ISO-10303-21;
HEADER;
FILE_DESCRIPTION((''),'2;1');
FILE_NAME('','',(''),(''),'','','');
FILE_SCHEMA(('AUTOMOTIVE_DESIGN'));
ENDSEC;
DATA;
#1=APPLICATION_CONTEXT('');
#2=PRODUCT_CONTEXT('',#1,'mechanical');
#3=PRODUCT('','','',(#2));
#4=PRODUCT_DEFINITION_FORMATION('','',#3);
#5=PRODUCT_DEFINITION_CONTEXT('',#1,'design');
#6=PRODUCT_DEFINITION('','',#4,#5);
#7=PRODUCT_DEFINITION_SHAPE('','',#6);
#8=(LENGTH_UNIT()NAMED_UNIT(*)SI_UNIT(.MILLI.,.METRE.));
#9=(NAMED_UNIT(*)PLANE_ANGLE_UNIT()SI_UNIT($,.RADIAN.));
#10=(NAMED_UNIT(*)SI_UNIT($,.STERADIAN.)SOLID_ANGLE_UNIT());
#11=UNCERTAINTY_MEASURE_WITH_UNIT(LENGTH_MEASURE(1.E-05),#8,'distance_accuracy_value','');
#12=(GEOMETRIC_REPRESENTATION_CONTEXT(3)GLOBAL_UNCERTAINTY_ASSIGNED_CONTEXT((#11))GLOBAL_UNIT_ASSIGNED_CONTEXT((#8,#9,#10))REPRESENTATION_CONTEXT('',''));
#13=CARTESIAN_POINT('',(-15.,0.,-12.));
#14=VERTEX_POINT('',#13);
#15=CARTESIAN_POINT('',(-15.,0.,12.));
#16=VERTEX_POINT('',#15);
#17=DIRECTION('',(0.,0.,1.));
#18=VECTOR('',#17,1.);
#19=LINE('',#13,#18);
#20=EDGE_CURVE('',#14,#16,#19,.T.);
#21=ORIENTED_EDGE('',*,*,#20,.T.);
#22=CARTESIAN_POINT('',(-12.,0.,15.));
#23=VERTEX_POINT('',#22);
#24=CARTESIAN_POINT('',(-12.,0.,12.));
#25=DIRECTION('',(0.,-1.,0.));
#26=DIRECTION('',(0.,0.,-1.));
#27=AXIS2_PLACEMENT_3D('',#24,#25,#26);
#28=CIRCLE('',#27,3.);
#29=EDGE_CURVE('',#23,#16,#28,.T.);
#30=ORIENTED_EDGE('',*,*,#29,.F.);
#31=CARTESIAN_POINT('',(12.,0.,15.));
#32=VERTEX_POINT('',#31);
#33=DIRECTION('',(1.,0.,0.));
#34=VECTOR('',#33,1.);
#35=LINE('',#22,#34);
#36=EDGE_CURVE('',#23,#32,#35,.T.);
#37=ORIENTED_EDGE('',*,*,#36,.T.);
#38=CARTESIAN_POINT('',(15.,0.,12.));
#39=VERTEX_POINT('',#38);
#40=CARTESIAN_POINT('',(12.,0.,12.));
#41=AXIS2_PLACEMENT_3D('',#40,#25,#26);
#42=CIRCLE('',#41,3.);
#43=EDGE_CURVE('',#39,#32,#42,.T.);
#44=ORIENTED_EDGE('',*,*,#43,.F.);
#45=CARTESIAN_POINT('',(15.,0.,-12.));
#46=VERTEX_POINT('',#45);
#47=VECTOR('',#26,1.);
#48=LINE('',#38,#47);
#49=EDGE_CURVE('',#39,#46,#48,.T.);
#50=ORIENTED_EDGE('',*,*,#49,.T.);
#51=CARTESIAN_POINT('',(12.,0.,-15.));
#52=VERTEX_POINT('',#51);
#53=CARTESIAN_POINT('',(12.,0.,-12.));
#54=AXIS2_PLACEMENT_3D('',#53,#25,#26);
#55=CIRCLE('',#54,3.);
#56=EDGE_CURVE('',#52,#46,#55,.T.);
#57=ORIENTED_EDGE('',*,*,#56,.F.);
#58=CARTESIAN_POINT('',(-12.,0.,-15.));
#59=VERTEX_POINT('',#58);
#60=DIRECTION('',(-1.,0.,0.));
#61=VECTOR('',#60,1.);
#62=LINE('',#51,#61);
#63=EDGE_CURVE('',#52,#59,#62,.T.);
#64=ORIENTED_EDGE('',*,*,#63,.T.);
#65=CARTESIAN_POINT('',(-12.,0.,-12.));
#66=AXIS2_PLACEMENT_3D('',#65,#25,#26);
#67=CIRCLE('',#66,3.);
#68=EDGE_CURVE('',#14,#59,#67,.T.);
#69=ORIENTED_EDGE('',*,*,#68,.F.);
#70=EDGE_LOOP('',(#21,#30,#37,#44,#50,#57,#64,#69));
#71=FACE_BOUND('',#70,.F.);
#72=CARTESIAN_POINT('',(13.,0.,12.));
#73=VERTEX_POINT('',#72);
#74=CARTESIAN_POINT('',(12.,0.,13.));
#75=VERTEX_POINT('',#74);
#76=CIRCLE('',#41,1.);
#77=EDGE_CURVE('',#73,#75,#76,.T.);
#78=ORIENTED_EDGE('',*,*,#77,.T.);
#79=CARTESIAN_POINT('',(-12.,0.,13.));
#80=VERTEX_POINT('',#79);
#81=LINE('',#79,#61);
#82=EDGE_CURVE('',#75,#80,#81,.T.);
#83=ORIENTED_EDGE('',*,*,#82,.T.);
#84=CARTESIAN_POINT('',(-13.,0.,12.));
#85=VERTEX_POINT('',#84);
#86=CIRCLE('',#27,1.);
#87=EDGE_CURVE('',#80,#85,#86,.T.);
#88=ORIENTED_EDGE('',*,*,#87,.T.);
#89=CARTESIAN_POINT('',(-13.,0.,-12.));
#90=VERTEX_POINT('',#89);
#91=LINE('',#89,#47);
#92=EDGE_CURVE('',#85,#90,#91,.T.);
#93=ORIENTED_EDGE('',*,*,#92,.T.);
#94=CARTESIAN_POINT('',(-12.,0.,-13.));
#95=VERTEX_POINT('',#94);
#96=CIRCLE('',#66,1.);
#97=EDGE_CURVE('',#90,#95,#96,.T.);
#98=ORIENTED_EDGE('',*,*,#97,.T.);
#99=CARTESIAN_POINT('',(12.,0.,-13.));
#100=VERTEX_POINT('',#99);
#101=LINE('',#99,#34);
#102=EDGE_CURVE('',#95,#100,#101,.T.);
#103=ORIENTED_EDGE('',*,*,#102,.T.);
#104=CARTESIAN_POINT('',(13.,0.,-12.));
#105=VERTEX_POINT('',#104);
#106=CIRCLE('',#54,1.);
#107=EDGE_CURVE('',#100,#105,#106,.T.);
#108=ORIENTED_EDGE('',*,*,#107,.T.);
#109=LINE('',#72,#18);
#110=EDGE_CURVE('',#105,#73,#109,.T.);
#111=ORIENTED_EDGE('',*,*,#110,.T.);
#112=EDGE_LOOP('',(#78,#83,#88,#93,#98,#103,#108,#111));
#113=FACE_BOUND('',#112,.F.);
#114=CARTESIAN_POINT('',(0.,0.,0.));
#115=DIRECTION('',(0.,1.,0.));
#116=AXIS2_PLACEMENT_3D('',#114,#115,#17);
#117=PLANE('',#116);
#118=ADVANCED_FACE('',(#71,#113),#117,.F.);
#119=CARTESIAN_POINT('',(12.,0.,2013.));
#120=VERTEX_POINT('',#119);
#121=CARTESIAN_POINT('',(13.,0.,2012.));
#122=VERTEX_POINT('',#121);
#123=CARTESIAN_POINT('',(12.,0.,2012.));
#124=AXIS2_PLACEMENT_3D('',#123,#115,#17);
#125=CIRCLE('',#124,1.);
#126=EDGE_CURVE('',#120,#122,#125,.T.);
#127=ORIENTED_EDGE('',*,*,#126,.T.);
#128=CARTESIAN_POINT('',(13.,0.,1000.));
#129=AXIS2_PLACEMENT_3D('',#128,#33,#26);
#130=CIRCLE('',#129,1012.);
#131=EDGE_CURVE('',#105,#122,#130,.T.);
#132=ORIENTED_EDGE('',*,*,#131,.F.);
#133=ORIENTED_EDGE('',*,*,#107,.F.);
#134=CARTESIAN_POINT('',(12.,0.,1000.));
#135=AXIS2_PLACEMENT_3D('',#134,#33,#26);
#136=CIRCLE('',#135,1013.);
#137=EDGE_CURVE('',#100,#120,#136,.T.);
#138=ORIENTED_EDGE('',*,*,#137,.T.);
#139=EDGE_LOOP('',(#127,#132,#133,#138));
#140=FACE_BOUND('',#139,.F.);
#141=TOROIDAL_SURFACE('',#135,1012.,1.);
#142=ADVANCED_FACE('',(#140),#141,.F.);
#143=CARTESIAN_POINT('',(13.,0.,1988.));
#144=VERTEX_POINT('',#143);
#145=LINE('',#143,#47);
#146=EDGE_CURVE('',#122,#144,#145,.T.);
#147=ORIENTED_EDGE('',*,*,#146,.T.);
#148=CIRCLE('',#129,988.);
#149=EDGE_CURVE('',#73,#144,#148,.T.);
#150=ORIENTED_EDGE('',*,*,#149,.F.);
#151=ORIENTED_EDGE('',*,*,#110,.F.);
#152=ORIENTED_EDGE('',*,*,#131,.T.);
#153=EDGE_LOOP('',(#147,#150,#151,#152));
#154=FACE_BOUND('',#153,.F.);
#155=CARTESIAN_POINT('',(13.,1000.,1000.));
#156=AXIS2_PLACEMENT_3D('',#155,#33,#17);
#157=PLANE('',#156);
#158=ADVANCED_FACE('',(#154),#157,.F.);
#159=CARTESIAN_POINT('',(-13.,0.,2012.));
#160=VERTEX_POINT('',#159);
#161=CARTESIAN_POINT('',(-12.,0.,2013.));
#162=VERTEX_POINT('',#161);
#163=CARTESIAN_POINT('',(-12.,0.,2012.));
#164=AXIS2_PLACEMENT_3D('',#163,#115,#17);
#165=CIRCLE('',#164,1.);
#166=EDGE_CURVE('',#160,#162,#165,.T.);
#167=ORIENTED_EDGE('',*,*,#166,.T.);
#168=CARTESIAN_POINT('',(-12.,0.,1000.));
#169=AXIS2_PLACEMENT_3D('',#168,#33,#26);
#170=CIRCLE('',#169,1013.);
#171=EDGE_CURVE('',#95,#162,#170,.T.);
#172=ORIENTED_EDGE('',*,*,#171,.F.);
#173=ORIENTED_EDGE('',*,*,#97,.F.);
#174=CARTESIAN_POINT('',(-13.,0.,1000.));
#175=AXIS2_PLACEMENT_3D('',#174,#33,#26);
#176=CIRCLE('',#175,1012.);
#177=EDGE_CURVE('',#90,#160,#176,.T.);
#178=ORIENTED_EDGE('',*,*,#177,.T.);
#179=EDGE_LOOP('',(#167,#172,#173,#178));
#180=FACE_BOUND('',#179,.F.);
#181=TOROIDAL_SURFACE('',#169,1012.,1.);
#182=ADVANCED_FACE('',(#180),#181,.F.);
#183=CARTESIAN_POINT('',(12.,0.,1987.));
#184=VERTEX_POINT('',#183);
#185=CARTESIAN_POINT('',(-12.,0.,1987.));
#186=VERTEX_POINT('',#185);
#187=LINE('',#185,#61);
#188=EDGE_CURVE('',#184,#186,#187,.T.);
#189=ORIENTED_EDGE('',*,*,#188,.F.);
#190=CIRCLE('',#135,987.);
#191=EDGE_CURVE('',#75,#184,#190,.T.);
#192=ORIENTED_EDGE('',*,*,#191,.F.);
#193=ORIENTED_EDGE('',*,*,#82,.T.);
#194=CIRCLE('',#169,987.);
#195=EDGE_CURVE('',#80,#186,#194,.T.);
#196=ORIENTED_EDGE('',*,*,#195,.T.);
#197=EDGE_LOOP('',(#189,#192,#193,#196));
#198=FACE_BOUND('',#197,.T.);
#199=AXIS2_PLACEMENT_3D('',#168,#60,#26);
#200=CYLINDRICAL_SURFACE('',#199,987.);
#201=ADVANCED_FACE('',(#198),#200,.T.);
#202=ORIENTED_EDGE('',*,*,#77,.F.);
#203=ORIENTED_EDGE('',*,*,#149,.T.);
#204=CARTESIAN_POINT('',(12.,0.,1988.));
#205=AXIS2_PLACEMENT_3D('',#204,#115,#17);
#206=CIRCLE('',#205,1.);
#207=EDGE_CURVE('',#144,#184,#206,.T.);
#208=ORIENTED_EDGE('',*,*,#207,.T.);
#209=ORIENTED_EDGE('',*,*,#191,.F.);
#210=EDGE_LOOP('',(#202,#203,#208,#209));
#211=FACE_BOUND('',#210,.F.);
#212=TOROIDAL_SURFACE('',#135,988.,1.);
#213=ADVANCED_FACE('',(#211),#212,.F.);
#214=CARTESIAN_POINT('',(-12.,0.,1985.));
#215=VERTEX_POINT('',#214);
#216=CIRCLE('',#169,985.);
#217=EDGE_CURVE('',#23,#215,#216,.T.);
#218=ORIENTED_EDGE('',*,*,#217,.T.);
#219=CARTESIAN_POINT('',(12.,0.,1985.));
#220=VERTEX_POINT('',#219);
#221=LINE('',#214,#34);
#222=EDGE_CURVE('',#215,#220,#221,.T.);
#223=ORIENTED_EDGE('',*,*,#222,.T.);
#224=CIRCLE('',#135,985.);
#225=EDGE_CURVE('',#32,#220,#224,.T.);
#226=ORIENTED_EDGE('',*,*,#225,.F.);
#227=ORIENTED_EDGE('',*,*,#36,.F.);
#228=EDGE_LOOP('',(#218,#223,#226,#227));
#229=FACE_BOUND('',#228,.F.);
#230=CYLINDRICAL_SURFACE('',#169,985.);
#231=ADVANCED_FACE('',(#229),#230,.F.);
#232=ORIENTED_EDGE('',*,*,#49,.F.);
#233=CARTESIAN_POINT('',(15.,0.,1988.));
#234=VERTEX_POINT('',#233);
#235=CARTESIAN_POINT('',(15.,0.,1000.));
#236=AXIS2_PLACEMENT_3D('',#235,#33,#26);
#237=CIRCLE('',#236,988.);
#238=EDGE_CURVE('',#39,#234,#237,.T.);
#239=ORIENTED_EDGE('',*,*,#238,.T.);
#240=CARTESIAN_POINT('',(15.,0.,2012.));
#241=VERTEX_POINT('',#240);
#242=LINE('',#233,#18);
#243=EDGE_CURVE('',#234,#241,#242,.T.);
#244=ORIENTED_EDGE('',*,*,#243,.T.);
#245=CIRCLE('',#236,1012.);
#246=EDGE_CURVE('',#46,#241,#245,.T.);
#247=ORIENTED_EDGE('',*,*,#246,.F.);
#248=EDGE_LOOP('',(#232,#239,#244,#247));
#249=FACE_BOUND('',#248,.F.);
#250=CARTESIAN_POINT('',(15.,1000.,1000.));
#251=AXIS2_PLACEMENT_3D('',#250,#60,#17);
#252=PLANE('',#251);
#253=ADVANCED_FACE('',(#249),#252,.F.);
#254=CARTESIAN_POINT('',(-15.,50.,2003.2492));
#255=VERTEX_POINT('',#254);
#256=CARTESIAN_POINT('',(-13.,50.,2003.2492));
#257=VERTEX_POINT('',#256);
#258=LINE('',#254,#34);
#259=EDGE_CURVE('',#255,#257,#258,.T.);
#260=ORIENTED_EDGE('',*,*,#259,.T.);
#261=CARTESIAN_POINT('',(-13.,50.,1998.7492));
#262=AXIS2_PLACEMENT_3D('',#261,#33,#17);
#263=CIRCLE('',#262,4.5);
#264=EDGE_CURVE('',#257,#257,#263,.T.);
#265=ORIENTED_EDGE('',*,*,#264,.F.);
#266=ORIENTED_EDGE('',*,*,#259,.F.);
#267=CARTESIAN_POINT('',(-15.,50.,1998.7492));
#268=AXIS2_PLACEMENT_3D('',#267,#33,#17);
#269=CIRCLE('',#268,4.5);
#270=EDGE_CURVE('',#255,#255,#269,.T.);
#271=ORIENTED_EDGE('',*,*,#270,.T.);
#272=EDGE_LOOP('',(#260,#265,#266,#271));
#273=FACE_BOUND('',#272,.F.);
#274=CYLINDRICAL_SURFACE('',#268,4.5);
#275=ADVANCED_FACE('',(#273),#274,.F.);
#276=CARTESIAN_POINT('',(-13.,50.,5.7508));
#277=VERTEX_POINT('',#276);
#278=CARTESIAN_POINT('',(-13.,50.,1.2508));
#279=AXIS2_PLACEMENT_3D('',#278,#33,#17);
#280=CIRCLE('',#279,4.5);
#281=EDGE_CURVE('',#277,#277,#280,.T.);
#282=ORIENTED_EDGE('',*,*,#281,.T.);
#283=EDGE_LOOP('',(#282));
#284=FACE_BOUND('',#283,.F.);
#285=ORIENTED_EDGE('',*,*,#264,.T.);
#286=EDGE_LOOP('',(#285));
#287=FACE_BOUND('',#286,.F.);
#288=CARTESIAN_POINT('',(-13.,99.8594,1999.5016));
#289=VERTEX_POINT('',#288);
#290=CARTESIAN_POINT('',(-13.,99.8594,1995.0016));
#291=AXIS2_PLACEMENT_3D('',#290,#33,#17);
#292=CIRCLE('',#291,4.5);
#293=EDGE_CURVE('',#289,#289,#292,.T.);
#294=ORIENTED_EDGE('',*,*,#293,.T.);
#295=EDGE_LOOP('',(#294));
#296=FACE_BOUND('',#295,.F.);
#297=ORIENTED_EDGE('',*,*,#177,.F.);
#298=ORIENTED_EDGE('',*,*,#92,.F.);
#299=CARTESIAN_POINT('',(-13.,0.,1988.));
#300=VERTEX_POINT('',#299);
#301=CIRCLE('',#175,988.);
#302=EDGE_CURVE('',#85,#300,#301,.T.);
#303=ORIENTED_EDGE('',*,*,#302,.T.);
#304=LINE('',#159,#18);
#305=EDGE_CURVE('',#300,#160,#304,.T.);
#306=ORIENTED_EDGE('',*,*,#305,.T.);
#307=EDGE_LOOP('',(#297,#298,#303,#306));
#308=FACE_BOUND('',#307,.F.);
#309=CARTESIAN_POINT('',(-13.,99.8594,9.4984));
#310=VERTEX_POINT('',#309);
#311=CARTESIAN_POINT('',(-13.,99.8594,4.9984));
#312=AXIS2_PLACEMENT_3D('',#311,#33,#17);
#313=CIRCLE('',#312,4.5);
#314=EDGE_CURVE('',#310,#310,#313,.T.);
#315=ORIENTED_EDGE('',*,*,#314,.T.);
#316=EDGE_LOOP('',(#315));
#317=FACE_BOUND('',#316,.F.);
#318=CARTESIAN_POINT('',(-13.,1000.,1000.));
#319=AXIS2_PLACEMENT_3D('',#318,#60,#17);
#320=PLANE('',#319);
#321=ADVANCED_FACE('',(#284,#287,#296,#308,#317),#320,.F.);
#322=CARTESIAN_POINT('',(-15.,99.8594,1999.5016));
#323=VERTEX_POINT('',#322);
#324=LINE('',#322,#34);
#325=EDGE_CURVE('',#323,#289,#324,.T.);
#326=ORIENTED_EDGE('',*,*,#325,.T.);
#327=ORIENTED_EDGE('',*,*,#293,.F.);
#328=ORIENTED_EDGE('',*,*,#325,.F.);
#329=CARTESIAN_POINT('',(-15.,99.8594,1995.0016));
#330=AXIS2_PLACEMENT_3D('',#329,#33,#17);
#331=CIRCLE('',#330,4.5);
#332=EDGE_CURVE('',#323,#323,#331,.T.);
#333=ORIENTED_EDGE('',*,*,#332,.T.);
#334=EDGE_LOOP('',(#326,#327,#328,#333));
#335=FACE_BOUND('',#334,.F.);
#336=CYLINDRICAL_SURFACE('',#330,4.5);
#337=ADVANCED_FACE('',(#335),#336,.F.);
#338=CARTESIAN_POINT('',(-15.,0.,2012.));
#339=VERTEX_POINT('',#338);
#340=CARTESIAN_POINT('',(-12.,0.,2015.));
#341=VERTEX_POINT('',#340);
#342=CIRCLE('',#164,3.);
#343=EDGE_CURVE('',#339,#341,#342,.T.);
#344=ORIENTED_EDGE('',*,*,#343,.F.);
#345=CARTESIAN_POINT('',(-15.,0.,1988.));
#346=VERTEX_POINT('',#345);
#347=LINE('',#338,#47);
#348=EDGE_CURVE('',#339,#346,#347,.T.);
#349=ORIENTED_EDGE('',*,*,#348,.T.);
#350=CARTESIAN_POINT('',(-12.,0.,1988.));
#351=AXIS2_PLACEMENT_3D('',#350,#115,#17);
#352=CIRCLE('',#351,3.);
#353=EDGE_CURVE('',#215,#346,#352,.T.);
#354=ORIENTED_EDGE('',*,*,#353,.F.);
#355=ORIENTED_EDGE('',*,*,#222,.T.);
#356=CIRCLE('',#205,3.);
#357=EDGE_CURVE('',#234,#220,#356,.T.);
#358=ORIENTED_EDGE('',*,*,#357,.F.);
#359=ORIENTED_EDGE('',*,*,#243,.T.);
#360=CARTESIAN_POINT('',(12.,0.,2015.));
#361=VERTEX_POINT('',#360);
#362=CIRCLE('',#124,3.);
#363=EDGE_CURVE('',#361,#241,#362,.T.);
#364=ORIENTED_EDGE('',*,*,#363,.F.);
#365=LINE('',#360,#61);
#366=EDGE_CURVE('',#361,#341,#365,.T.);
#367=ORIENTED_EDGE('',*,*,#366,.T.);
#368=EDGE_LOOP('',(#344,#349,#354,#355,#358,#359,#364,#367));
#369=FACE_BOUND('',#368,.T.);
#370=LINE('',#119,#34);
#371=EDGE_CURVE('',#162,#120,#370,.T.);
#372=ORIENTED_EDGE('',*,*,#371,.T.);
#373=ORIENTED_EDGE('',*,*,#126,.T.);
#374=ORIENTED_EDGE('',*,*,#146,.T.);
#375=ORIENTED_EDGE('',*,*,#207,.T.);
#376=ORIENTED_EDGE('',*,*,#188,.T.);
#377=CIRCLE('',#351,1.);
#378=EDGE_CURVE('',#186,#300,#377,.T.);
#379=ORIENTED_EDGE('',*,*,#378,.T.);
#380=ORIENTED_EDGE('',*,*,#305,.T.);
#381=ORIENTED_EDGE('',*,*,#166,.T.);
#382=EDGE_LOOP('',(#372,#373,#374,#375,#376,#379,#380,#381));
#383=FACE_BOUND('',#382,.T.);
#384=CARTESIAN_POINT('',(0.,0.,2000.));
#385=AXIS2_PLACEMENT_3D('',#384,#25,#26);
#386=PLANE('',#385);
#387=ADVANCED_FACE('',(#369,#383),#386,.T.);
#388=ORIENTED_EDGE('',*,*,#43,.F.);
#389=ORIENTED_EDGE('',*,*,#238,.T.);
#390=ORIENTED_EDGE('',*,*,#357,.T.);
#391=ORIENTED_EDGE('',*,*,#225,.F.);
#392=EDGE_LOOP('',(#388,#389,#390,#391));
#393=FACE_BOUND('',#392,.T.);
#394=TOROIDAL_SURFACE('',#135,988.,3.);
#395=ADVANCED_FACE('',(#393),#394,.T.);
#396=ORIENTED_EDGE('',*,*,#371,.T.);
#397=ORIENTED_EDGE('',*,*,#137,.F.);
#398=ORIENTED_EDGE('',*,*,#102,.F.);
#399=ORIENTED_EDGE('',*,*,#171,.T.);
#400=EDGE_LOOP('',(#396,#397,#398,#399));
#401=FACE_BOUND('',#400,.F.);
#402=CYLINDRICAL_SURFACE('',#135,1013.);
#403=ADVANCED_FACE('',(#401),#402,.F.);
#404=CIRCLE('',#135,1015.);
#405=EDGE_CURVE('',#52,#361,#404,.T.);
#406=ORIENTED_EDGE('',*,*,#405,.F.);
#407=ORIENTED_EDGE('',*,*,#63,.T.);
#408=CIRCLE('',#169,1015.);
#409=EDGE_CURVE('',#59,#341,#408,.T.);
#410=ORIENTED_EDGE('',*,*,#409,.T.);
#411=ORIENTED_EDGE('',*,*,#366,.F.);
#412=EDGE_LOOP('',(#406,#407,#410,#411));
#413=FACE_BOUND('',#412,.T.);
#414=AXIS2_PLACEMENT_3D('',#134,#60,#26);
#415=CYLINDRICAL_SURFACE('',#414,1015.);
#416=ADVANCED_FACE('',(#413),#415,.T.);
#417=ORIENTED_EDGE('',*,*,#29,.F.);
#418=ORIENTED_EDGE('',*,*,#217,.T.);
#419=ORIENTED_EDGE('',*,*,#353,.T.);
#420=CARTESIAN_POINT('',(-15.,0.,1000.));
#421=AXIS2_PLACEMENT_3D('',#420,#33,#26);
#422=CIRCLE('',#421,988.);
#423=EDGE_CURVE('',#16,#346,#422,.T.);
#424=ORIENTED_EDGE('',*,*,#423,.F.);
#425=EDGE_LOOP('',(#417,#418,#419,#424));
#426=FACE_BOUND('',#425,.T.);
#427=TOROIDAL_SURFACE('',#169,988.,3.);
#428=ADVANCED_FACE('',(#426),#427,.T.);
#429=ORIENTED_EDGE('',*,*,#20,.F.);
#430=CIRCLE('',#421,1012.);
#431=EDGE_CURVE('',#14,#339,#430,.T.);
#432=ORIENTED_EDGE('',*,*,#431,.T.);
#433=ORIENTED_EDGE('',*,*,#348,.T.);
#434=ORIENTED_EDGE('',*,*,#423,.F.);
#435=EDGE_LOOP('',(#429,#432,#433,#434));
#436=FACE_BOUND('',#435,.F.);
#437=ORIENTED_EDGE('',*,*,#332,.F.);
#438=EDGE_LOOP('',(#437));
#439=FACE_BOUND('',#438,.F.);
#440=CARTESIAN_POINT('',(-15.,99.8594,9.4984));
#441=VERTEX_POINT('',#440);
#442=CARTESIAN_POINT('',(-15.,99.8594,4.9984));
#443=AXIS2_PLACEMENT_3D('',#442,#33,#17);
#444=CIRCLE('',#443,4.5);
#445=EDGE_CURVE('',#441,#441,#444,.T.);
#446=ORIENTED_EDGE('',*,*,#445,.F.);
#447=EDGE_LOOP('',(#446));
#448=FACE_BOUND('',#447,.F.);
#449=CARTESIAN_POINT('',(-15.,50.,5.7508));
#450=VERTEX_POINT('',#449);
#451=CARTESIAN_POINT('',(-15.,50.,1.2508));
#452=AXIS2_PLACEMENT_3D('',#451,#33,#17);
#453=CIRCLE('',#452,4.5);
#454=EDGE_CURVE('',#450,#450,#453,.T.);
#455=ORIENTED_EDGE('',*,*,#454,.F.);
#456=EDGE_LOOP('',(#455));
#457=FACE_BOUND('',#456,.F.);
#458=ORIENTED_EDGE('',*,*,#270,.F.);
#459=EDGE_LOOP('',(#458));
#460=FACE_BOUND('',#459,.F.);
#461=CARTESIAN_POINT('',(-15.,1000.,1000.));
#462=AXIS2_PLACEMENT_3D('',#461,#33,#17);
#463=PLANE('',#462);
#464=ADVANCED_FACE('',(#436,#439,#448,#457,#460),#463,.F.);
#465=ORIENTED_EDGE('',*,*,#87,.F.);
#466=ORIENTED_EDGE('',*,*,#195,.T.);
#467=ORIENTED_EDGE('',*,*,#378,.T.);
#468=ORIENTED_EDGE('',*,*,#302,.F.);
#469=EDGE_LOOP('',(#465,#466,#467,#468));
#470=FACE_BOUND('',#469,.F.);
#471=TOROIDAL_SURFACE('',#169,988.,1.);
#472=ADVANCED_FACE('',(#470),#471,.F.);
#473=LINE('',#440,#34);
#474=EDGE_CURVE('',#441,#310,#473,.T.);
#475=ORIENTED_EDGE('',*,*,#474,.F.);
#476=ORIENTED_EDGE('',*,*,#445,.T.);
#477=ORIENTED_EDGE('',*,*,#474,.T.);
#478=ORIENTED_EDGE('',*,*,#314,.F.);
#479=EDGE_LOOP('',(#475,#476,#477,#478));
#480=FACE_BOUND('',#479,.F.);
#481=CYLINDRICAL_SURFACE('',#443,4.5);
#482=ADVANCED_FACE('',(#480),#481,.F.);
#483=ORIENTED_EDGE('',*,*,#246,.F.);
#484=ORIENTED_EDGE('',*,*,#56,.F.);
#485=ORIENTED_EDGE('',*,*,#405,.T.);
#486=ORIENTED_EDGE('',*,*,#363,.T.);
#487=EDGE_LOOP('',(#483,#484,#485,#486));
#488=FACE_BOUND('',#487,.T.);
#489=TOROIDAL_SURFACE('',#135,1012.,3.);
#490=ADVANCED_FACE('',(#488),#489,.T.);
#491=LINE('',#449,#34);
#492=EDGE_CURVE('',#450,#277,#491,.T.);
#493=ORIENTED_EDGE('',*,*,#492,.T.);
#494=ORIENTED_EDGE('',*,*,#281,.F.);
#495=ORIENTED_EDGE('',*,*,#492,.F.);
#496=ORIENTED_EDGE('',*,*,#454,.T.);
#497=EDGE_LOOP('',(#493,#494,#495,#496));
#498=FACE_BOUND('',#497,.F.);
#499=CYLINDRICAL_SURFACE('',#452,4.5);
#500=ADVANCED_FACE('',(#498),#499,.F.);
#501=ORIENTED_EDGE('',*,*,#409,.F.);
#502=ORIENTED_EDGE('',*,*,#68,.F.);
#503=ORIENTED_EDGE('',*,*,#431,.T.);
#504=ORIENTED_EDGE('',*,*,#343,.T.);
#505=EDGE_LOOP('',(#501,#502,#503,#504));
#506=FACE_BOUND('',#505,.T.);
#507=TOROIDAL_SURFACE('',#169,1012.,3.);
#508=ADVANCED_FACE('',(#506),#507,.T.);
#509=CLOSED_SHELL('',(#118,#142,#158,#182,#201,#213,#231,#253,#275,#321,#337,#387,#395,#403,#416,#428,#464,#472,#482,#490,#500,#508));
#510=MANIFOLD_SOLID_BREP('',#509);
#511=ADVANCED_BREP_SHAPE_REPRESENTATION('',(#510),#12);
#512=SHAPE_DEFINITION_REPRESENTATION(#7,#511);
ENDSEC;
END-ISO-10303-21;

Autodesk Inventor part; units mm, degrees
ref_plane "YZ Plane" through (0, 0, 0) normal (1, 0, 0) x (0, 1, 0)
ref_plane "XZ Plane" through (0, 0, 0) normal (0, 1, 0) x (-1, 0, 0)
sketch "Sketch1" plane through (0, 0, 0) normal (0, 1, 0) x (-1, 0, 0)
  line L0 (-12, 14) -> (12, 14) construction
  line L1 (14, 12) -> (14, -12) construction
  line L2 (12, -14) -> (-12, -14) construction
  line L3 (-14, -12) -> (-14, 12) construction
  line L4 (-14, 14) -> (14, -14) construction
  line L5 (14, 14) -> (-14, -14) construction
  arc A0 (14, 12) -> (12, 14) centre (12, 12) ccw construction
  arc A1 (12, -14) -> (14, -12) centre (12, -12) ccw construction
  arc A2 (-14, -12) -> (-12, -14) centre (-12, -12) ccw construction
  arc A3 (-12, 14) -> (-14, 12) centre (-12, 12) ccw construction
  line L6 (-12, -15) -> (12, -15)
  arc A4 (12, -15) -> (15, -12) centre (12, -12) ccw
  line L7 (15, -12) -> (15, 12)
  arc A5 (15, 12) -> (12, 15) centre (12, 12) ccw
  line L8 (12, 15) -> (-12, 15)
  arc A6 (-12, 15) -> (-15, 12) centre (-12, 12) ccw
  line L9 (-15, 12) -> (-15, -12)
  arc A7 (-15, -12) -> (-12, -15) centre (-12, -12) ccw
  line L10 (13, -12) -> (13, 12)
  arc A8 (13, 12) -> (12, 13) centre (12, 12) ccw
  line L11 (12, 13) -> (-12, 13)
  arc A9 (-12, 13) -> (-13, 12) centre (-12, 12) ccw
  line L12 (-13, 12) -> (-13, -12)
  arc A10 (-13, -12) -> (-12, -13) centre (-12, -12) ccw
  line L13 (-12, -13) -> (12, -13)
  arc A11 (12, -13) -> (13, -12) centre (12, -12) ccw
  point P0 (0, 0)
  point P1 (0, 0)
  point P2 (0, 0)
  dimension "d10" = 2
  dimension "depth" = 30
  dimension "width" = 30
  dimension "thickness" = 2
sketch "Sketch3" plane through (0, 0, 0) normal (1, 0, 0) x (0, 1, 0)
  line L0 (0, 0) -> (0, 2000) construction
  arc A0 (0, 0) -> (0, 2000) centre (0, 1000) ccw
  line L1 (0, -400) -> (0, 2400) projected
  line L2 (-200, 0) -> (1200, 0) projected
  dimension "d30" = 2000
  dimension "d31" = 1000
sweep "Sweep1" add profiles "Sketch1" path "Sketch3" path curves A0
sketch "Sketch5" plane through (-15, 0, 1000) normal (-1, 0, 0) x (0, 0, 1)
  arc A0 (1000, 0) -> (-1000, 0) centre (0, 0) ccw construction
  line L0 (-1012, 0) -> (-988, 0) projected
  line L1 (1012, 0) -> (988, 0) projected
  point P0 (-1000, 0)
  point P1 (-998.7492, 50)
  point P2 (-995.0016, 99.8594)
  point P3 (1000, 0)
  point P4 (998.7492, 50)
  point P5 (995.0016, 99.8594)
  dimension "d46" = 50
  dimension "d51" = 50
  dimension "d52" = 50
  dimension "d53" = 50
hole "Hole3" at (-15, 50, 1.2508) at (-15, 99.8594, 4.9984) at (-15, 50, 1998.7492) at (-15, 99.8594, 1995.0016) direction (1, 0, 0) diameter 9 depth 20.2 tip angle 118
ref_plane "Work Plane3" through (0, 0, 1000) normal (0, 0, 1) x (1, 0, 0)
equation "\"d10\" = thickness"
equation "\"d31\" = 0.5 * d30"
properties part number "Luk R2000" material "Steel"
